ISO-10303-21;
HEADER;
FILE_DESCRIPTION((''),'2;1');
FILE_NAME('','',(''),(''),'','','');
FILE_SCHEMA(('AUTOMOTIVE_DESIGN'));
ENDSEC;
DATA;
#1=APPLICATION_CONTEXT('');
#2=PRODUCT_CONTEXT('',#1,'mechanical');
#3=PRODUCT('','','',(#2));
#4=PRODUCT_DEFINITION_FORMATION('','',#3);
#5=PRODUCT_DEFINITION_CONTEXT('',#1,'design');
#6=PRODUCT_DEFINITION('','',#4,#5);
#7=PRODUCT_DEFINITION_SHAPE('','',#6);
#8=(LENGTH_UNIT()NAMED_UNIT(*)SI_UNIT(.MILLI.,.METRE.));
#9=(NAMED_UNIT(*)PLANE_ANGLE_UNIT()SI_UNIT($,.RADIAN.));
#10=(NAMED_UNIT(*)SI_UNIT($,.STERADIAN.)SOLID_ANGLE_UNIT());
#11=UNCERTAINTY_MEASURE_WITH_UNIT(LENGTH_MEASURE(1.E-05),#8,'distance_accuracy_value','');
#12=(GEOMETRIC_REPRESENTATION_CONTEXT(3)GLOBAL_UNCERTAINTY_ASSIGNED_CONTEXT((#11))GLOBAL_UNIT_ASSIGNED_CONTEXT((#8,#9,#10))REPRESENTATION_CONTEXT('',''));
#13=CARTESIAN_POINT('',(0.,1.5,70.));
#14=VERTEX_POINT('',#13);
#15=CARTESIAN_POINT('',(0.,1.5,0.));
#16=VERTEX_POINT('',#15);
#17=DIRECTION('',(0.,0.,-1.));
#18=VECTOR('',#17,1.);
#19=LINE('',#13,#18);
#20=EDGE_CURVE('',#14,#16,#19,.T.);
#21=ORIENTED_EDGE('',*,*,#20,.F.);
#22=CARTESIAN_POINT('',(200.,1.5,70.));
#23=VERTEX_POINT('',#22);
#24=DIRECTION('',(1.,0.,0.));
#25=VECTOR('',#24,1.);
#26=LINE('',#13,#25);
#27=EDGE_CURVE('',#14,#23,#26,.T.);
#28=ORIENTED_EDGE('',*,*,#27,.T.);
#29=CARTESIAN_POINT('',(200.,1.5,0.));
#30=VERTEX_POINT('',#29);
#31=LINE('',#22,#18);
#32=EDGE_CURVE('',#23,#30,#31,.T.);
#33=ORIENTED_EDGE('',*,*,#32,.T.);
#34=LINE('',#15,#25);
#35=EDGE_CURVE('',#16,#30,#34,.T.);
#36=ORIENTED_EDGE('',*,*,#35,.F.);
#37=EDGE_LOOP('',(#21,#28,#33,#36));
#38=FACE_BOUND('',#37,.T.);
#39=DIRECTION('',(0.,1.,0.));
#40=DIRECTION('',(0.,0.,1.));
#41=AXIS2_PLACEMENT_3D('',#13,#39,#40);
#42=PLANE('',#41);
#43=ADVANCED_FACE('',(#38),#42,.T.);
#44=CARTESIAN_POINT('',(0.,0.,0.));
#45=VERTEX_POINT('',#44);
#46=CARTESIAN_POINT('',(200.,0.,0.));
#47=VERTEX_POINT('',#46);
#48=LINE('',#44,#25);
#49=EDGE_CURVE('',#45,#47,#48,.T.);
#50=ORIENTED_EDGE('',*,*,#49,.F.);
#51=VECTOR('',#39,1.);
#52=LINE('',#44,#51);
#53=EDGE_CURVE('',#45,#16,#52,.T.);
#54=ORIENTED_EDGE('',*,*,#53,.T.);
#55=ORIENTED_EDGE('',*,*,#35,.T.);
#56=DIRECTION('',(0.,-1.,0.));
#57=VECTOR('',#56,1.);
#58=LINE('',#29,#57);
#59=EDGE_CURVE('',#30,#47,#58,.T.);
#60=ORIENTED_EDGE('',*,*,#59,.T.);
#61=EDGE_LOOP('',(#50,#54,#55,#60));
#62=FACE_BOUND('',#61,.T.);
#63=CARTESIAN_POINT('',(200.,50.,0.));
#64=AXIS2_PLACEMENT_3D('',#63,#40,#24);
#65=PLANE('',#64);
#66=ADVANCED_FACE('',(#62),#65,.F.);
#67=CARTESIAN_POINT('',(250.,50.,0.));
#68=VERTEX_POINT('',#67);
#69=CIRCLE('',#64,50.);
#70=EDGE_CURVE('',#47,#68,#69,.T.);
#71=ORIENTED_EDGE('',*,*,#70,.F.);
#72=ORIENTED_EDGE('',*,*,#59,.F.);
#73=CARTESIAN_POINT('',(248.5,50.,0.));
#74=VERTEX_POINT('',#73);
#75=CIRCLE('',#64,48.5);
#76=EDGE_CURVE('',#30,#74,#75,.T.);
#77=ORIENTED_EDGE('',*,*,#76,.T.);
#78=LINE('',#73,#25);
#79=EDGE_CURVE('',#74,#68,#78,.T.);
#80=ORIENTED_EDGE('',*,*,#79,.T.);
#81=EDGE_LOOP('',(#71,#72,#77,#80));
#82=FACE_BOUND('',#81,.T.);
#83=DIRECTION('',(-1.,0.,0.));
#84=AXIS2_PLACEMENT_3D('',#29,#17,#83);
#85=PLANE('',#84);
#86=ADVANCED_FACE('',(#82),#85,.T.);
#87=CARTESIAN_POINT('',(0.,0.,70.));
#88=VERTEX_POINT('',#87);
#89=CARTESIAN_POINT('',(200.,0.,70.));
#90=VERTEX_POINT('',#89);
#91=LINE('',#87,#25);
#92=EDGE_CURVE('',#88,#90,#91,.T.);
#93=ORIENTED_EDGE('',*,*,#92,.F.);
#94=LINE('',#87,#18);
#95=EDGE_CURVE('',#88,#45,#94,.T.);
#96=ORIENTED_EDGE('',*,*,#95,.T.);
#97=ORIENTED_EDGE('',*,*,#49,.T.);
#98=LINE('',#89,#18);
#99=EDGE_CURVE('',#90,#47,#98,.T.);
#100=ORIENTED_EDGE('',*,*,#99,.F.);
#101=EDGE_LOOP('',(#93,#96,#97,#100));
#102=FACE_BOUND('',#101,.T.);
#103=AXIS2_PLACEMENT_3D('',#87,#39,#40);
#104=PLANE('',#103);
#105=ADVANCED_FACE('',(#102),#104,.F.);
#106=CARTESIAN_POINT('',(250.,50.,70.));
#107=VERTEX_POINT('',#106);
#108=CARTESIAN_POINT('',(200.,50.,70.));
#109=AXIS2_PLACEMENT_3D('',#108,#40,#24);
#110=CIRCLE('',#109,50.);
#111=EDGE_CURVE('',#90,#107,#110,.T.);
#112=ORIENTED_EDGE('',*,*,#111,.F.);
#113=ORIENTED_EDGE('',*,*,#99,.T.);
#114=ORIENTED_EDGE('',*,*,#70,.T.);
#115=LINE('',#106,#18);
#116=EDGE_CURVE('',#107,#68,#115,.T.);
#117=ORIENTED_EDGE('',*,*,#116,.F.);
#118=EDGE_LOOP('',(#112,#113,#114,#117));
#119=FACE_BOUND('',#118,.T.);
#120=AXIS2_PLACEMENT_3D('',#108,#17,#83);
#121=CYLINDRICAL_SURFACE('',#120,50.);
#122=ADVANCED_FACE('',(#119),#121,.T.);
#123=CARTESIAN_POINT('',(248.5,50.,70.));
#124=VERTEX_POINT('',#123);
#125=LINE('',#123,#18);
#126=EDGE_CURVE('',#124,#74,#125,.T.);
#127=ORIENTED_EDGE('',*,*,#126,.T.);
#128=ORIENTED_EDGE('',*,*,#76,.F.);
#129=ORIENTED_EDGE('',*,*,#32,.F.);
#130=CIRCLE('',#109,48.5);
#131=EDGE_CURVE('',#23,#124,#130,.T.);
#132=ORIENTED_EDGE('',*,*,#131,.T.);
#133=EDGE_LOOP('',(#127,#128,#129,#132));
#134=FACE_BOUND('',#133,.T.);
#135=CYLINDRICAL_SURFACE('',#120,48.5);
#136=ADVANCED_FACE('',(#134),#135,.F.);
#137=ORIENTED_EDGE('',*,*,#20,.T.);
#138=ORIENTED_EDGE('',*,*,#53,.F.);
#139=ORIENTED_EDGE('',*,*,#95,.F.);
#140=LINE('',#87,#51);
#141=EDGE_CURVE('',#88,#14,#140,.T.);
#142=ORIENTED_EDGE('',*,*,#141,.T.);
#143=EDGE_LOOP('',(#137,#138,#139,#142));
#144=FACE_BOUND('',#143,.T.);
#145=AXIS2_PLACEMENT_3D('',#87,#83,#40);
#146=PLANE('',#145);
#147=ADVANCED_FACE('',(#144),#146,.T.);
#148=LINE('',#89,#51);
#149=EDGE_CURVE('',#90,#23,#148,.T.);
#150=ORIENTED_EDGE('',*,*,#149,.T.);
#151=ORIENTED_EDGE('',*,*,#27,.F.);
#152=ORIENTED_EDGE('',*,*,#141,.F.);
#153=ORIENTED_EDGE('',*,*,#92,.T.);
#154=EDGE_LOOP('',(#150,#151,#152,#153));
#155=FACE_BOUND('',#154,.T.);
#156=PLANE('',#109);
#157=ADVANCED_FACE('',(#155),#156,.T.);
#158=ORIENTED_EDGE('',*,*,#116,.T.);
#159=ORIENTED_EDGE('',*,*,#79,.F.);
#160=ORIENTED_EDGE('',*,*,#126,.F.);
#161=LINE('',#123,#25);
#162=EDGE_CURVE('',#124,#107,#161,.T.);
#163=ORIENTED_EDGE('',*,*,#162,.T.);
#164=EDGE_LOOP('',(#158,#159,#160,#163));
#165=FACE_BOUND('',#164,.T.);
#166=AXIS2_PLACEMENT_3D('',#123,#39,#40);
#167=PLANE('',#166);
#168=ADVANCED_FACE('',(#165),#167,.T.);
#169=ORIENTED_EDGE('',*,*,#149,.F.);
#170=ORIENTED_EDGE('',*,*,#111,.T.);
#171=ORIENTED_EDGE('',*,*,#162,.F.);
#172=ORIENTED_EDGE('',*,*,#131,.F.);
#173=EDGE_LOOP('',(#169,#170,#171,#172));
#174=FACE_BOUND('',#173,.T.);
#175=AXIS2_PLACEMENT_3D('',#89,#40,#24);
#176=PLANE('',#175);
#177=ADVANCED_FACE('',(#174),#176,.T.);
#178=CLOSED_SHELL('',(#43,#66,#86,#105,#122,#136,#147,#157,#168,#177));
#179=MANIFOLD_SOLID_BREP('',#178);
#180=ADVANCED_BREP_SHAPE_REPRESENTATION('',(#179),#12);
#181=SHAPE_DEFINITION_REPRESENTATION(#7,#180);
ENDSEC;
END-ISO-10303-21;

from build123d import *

# Parameters (mm, degrees)
SM_BASE_FLANGE_1_DEPTH = 70


# Sheet-metal steps are written as plain solids
with BuildPart() as part:
    # Sketch 1 → 基体-法兰1 (new body)
    with BuildSketch(Plane.XY):
        with BuildLine():
            Line((0, 0), (200, 0))
            ThreePointArc((200, 0), (235.355339059, 14.644660941), (250, 50))
            Line((250, 50), (248.5, 50))
            ThreePointArc((248.5, 50), (234.294678888, 15.705321112), (200, 1.5))
            Line((200, 1.5), (0, 1.5))
            Line((0, 1.5), (0, 0))
        make_face()
    extrude(amount=SM_BASE_FLANGE_1_DEPTH)


solid = part.part
